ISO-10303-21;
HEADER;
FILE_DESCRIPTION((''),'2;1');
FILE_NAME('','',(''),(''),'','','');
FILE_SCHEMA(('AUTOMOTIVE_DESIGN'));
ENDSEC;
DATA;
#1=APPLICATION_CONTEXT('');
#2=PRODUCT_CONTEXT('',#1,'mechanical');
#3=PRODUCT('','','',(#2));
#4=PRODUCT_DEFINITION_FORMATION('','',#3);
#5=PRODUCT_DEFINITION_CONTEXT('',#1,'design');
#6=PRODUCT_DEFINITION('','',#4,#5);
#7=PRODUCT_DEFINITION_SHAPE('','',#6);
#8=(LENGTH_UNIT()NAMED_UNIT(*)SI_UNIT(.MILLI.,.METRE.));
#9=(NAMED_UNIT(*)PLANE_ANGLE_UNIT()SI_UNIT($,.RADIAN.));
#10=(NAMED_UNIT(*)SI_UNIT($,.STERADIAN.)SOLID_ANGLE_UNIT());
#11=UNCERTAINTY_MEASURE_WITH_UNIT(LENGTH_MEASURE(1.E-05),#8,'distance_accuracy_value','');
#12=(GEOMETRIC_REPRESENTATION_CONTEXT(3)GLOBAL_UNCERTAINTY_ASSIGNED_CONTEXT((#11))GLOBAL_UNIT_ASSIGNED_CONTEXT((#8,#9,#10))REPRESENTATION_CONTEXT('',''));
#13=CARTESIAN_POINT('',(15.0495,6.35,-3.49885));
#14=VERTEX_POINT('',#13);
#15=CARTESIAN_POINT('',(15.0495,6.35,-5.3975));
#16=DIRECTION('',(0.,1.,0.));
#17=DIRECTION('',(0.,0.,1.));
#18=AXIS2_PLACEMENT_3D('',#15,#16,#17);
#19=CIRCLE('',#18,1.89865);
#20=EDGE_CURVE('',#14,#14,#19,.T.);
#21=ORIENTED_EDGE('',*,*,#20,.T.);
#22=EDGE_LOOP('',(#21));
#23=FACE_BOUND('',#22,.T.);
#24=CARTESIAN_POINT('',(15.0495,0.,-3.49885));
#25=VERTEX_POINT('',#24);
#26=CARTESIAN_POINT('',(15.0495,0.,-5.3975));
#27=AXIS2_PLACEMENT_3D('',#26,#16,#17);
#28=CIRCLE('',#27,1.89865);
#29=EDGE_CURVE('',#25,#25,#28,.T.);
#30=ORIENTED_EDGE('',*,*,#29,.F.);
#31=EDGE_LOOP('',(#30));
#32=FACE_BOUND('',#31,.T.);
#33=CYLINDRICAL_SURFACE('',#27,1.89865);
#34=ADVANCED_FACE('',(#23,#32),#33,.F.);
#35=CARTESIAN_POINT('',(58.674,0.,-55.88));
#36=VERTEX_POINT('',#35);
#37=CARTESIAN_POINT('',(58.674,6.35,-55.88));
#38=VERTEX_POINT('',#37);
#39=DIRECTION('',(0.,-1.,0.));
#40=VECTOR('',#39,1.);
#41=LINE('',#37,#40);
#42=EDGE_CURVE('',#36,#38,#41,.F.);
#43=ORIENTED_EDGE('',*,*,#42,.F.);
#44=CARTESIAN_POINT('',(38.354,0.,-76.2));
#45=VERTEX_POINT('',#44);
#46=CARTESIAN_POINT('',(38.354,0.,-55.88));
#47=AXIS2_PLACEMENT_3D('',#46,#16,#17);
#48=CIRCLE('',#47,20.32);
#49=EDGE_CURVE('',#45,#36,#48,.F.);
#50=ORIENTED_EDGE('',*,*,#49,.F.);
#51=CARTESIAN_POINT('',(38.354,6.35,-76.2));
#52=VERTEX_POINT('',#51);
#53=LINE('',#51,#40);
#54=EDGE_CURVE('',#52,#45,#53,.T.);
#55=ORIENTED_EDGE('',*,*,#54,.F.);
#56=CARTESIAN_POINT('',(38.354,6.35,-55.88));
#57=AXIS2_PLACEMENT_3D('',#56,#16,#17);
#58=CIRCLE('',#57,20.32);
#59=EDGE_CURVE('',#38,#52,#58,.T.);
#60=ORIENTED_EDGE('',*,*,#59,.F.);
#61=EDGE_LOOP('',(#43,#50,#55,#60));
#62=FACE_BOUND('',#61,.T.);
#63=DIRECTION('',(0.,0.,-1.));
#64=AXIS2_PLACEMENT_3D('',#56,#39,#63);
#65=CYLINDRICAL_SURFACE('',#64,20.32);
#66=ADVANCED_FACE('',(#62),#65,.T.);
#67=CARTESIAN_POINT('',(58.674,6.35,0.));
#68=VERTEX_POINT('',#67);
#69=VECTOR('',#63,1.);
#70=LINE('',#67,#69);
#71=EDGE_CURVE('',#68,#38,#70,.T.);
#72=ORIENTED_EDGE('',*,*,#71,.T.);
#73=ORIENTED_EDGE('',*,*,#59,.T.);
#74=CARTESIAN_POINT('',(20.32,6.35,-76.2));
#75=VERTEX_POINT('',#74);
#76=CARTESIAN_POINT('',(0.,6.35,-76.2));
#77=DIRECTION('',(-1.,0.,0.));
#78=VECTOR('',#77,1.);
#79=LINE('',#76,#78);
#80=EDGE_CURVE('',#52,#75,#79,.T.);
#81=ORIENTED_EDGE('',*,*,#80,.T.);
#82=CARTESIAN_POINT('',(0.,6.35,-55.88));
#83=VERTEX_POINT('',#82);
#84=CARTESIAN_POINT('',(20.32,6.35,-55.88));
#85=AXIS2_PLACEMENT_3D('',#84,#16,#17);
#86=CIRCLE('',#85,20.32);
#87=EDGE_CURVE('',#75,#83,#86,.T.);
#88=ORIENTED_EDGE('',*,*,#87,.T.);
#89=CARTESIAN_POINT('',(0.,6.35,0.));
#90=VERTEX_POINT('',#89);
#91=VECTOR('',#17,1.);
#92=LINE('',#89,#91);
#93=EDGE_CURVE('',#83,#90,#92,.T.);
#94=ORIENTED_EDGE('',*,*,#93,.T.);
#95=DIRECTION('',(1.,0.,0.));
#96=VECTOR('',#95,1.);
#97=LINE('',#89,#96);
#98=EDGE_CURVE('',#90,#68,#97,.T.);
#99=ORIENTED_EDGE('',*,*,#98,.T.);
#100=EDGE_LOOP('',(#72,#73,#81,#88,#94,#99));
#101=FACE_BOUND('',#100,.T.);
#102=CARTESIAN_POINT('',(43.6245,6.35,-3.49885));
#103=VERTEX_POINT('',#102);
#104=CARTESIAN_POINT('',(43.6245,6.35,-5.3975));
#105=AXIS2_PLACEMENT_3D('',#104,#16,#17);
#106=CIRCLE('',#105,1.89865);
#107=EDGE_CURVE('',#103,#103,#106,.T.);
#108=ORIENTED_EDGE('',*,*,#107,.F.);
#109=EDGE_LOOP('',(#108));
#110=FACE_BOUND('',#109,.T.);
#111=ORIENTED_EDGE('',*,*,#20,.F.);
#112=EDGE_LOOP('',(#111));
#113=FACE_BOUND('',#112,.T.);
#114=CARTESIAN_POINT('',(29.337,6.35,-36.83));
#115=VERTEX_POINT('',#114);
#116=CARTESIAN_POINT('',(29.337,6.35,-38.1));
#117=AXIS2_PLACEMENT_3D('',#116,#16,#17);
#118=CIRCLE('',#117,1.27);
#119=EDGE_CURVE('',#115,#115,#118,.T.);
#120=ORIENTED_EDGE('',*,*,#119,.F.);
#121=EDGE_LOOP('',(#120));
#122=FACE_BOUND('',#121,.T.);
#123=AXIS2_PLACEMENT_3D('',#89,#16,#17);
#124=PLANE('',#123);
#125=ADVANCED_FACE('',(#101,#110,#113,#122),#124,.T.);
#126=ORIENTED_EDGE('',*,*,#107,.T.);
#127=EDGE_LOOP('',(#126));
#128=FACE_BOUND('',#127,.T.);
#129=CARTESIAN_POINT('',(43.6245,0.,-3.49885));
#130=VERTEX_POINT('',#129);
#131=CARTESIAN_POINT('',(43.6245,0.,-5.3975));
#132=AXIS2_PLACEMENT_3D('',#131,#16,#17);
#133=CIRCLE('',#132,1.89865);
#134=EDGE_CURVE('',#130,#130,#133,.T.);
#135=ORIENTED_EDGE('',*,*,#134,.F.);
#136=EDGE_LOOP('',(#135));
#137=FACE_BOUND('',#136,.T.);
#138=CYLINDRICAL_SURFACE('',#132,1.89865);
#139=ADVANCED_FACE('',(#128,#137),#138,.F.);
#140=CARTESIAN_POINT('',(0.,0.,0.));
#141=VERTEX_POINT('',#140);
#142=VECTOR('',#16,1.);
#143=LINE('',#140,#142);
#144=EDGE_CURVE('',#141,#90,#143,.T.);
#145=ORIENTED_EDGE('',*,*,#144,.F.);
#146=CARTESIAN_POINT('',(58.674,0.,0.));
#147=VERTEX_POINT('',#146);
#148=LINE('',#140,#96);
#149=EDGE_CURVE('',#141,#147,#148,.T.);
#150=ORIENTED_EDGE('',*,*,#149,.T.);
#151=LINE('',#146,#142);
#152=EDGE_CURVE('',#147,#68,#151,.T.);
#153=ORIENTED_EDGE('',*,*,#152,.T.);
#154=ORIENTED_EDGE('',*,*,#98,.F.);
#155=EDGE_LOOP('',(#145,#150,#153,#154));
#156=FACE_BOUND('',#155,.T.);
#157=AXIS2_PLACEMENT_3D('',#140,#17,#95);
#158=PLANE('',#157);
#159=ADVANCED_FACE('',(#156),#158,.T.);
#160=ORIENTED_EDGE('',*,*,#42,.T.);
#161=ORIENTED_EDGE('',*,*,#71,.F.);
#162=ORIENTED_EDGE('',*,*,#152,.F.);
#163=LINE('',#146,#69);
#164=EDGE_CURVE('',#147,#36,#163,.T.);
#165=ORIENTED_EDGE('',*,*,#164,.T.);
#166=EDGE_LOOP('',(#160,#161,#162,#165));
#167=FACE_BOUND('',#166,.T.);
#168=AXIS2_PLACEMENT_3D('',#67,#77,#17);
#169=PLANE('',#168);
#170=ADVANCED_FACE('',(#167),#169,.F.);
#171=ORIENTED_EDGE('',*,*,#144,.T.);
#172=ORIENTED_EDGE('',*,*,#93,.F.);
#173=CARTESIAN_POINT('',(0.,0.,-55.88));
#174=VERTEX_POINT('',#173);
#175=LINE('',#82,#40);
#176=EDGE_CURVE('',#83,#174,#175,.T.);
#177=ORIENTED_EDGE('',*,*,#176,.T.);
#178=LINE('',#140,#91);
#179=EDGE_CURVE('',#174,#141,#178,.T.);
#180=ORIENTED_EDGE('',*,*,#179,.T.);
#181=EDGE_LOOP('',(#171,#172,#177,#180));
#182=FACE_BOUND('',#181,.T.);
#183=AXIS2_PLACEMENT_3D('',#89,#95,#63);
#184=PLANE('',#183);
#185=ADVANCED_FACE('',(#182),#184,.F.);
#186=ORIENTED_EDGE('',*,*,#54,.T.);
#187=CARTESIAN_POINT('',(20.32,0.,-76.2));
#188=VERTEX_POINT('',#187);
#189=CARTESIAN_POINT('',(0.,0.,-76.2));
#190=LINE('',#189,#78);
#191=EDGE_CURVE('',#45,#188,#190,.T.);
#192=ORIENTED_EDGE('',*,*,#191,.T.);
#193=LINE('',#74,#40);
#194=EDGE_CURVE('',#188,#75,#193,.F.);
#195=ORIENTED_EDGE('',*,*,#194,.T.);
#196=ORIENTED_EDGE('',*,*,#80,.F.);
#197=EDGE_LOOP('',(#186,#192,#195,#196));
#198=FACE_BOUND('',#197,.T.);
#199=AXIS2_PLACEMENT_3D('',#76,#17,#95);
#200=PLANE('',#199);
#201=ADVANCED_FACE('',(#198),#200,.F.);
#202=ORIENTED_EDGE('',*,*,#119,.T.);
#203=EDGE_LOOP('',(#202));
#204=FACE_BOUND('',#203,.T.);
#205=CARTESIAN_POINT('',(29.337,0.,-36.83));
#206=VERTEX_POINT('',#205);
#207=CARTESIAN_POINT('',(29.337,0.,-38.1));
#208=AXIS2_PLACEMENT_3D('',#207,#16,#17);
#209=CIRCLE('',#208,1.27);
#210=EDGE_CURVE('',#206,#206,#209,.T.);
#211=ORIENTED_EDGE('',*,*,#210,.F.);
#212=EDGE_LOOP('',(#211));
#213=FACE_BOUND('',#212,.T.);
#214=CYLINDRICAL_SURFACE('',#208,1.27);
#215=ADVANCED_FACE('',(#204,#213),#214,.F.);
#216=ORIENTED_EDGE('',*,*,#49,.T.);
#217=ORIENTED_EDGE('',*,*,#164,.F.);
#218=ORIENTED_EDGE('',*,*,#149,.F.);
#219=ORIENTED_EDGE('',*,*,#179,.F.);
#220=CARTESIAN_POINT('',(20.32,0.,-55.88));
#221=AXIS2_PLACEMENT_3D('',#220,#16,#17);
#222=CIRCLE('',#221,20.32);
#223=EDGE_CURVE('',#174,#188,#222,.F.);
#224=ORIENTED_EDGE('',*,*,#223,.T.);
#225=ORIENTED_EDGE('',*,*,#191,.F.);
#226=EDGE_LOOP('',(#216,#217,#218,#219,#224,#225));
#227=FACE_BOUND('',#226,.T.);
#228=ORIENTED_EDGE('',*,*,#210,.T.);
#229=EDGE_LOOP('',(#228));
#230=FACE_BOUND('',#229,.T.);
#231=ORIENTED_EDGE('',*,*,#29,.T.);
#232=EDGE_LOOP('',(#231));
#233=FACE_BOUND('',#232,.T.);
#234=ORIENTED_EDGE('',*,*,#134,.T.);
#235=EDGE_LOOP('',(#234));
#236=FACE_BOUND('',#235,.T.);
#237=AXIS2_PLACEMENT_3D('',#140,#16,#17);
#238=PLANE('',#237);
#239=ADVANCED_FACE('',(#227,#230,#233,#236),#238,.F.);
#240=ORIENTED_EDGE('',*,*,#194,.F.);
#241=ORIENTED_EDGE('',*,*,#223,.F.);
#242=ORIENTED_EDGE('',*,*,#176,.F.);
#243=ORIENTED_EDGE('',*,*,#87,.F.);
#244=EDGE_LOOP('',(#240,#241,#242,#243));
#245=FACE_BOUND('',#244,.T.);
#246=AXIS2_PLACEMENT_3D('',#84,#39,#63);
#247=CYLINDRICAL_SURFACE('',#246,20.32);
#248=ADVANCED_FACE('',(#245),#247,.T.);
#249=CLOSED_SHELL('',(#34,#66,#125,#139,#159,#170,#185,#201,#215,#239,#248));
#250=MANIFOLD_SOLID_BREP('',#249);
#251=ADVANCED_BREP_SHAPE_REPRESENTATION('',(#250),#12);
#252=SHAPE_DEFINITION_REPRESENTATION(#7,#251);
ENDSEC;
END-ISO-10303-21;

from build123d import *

# Parameters (mm, degrees)
SKETCH1_W           = 58.674
SKETCH1_H           = 76.2
BOSS_EXTRUDE1_DEPTH = 6.35
CUT_EXTRUDE1_DEPTH  = 97.381537527
SKETCH3_W           = 58.674
SKETCH3_H           = 6.35
BOSS_EXTRUDE2_DEPTH = 7.62
SKETCH4_W           = 15.24
SKETCH4_H           = 7.62
CUT_EXTRUDE2_DEPTH  = 97.381537527
FILLET1_R           = 3.175
SKETCH5_R           = 2.54
CUT_EXTRUDE3_DEPTH  = 88.939040568
FILLET2_R           = 20.32
SKETCH7_W           = 58.92775625
SKETCH7_H           = 8.241690561
CUT_EXTRUDE4_DEPTH  = 97.381537527
SKETCH8_R           = 1.89865
CUT_EXTRUDE5_DEPTH  = 97.381537527


with BuildPart() as part:
    # Sketch1 → Boss-Extrude1 (new body)
    with BuildSketch(Plane(origin=(0, 0, 0), x_dir=(1, 0, 0), z_dir=(0, 1, 0))):
        with Locations((29.337, 38.1)):
            Rectangle(SKETCH1_W, SKETCH1_H)
    extrude(amount=BOSS_EXTRUDE1_DEPTH)

    # Sketch2 → Cut-Extrude1 (cut, through all)
    with BuildSketch(Plane(origin=(0, 6.35, 0), x_dir=(1, 0, 0), z_dir=(0, 1, 0))):
        with BuildLine():
            ThreePointArc((30.607, 38.1), (29.337, 39.37), (28.067, 38.1))
            Line((28.067, 38.1), (30.607, 38.1))
        make_face()
        with BuildLine():
            Line((30.607, 38.1), (28.067, 38.1))
            ThreePointArc((28.067, 38.1), (29.337, 36.83), (30.607, 38.1))
        make_face()
    extrude(amount=-CUT_EXTRUDE1_DEPTH, mode=Mode.SUBTRACT)

    # Sketch3 → Boss-Extrude2 (add)
    with BuildSketch(Plane.XY):
        with Locations((29.337, 3.175)):
            Rectangle(SKETCH3_W, SKETCH3_H)
    extrude(amount=BOSS_EXTRUDE2_DEPTH)

    # Sketch4 → Cut-Extrude2 (cut, through all)
    with BuildSketch(Plane(origin=(0, 6.35, 0), x_dir=(1, 0, 0), z_dir=(0, 1, 0))):
        with Locations((7.62, -3.81)):
            Rectangle(SKETCH4_W, SKETCH4_H)
        with Locations((29.337, -3.81)):
            Rectangle(SKETCH4_W, SKETCH4_H)
        with Locations((51.054, -3.81)):
            Rectangle(SKETCH4_W, SKETCH4_H)
    extrude(amount=-CUT_EXTRUDE2_DEPTH, mode=Mode.SUBTRACT)

    # Fillet1
    fillet1_edges = [part.edges().sort_by_distance(p)[0] for p in [
        (40.1955, 0, 7.62),
        (40.1955, 6.35, 7.62),
        (18.4785, 0, 7.62),
        (18.4785, 6.35, 7.62),
    ]]
    fillet(fillet1_edges, radius=FILLET1_R - 0.0001)  # a hair under: the kernel refuses the full size

    # Sketch5 → Cut-Extrude3 (cut, through all)
    with BuildSketch(Plane(origin=(43.434, 0, 0), x_dir=(0, 0, -1), z_dir=(1, 0, 0))):
        with Locations((-4.445, 3.175)):
            Circle(SKETCH5_R)
    extrude(amount=-CUT_EXTRUDE3_DEPTH, mode=Mode.SUBTRACT)

    # Fillet2
    fillet2_edges = [part.edges().sort_by_distance(p)[0] for p in [
        (0, 3.175, -76.2),
        (58.674, 3.175, -76.2),
    ]]
    fillet(fillet2_edges, radius=FILLET2_R)

    # Sketch7 → Cut-Extrude4 (cut, through all)
    with BuildSketch(Plane(origin=(0, 6.35, 0), x_dir=(1, 0, 0), z_dir=(0, 1, 0))):
        with Locations((29.463878125, -4.120845281)):
            Rectangle(SKETCH7_W, SKETCH7_H)
    extrude(amount=-CUT_EXTRUDE4_DEPTH, mode=Mode.SUBTRACT)

    # Sketch8 → Cut-Extrude5 (cut, through all)
    with BuildSketch(Plane(origin=(0, 6.35, 0), x_dir=(1, 0, 0), z_dir=(0, 1, 0))):
        with Locations(Location((43.6245, 5.3975, 0), (0, 0, 270))):
            Circle(SKETCH8_R)
        with Locations(Location((15.0495, 5.3975, 0), (0, 0, 270))):
            Circle(SKETCH8_R)
    extrude(amount=-CUT_EXTRUDE5_DEPTH, mode=Mode.SUBTRACT)


solid = part.part
